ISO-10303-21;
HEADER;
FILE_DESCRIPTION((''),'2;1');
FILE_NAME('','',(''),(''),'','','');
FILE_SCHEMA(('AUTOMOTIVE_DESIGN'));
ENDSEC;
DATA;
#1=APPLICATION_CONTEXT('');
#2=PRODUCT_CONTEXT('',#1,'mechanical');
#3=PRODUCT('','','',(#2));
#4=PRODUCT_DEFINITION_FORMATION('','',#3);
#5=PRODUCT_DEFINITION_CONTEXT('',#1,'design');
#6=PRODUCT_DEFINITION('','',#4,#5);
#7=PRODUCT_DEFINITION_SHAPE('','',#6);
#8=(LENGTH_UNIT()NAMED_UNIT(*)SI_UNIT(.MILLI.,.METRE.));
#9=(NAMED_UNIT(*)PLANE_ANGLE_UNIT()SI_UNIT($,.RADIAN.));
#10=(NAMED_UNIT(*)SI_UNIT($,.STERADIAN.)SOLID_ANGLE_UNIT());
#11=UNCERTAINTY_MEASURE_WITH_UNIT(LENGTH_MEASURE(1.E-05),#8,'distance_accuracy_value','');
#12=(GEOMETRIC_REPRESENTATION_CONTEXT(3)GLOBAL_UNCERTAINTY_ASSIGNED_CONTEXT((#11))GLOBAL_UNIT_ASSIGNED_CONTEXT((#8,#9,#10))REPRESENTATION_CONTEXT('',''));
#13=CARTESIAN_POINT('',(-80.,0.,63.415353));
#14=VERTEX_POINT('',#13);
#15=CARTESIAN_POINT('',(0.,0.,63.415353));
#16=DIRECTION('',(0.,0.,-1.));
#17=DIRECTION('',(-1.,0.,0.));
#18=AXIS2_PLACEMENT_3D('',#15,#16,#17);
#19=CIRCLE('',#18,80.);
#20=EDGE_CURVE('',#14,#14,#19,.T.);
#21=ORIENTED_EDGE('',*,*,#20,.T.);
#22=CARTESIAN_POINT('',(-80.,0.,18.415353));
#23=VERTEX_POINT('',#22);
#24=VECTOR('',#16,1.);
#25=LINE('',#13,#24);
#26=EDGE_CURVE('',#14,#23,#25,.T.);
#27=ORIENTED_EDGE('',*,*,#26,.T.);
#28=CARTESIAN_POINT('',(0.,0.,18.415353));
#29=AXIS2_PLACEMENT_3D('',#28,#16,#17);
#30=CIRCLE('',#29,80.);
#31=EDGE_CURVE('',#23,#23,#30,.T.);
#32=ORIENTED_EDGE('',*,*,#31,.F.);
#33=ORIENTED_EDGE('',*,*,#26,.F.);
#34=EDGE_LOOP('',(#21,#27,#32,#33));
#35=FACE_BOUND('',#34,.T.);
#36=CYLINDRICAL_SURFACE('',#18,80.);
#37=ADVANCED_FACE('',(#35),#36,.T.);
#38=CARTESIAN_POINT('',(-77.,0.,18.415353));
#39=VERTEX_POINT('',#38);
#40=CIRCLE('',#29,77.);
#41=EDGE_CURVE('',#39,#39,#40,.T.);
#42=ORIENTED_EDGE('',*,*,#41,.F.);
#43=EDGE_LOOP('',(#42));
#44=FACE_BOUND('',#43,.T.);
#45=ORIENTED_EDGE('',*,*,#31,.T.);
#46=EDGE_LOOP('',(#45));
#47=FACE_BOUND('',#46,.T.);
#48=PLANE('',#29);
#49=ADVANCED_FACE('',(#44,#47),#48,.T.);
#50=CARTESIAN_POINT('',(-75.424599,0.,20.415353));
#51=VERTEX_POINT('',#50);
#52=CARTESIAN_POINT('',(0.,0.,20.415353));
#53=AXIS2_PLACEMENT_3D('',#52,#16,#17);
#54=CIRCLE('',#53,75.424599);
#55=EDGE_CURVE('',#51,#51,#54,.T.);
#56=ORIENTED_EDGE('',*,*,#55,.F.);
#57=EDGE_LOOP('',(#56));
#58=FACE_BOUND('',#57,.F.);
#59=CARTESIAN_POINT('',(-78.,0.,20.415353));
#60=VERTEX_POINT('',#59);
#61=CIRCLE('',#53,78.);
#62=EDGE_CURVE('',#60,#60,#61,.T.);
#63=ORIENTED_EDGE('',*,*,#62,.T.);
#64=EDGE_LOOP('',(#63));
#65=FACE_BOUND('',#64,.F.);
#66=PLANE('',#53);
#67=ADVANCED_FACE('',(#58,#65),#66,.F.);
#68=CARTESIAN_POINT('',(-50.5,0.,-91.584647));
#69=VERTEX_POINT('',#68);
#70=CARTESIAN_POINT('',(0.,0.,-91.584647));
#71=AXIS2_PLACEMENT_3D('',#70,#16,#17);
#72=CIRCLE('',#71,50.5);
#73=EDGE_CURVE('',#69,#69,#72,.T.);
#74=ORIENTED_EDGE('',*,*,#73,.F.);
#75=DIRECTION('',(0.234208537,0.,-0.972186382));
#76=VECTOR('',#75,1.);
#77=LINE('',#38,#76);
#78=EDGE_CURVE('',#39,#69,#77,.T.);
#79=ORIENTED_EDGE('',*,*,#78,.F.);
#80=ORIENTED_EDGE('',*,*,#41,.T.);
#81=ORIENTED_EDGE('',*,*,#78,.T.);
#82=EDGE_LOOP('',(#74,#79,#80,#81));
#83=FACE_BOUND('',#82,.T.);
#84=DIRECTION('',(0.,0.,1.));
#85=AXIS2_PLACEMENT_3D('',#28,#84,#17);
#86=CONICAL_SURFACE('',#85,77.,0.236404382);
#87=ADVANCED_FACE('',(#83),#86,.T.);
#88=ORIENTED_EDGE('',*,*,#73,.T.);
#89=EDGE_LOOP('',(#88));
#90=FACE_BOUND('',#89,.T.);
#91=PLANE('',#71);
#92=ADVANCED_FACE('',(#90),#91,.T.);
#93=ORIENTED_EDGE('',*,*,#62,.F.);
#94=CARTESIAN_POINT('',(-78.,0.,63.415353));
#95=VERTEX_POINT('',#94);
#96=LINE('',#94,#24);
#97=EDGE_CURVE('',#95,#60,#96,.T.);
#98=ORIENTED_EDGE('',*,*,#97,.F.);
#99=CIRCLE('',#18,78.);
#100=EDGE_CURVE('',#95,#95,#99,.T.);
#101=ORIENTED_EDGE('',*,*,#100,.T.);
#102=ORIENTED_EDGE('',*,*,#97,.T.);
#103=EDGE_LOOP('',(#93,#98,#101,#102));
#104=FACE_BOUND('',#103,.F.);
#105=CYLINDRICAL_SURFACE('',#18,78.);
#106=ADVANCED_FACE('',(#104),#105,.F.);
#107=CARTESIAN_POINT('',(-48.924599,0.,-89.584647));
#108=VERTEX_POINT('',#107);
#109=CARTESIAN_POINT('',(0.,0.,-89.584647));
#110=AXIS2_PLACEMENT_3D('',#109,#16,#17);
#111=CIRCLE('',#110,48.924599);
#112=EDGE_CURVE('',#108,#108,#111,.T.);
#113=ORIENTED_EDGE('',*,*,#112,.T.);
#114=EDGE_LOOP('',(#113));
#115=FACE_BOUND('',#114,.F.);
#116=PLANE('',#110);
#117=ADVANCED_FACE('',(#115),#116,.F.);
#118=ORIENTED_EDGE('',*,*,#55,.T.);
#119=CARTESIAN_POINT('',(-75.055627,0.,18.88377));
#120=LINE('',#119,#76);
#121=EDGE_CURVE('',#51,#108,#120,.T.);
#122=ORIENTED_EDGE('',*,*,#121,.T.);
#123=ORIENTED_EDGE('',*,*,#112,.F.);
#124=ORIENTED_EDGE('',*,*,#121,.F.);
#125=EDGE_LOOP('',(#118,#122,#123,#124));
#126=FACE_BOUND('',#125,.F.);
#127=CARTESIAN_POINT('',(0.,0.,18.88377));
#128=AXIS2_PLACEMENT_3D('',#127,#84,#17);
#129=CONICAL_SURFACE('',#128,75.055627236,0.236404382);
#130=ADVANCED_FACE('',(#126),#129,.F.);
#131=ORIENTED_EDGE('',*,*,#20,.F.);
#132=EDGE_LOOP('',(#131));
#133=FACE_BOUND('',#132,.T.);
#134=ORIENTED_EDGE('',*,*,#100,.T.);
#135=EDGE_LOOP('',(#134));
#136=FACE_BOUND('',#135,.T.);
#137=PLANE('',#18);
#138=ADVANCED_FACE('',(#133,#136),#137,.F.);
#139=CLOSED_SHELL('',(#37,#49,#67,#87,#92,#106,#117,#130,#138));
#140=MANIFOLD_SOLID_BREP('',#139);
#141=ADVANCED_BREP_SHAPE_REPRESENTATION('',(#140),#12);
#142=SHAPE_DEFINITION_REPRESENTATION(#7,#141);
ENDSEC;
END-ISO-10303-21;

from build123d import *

# Parameters (mm, degrees)
F2_T = -2


# Not quite as in the source:
# - a feature names something its author has since deleted; it is built from what else it names


with BuildPart() as f1:
    # F0 (on Front) → F1 (revolve)
    with BuildSketch(Plane.XZ):
        Polygon((0, -91.5846474071), (0, 63.4153525929), (-80, 63.4153525929), (-80, 18.4153525929), (-77, 18.4153525929), (-50.5, -91.5846474071), align=None)
    revolve(axis=Axis((0, 0, -14.0846474071), (0, 0, -1)))

    # F2
    f2_openings = [f1.faces().sort_by_distance(p)[0] for p in [
        (0, 0, 63.415353),
    ]]
    offset(amount=F2_T, openings=f2_openings, kind=Kind.INTERSECTION)


solid = f1.part
